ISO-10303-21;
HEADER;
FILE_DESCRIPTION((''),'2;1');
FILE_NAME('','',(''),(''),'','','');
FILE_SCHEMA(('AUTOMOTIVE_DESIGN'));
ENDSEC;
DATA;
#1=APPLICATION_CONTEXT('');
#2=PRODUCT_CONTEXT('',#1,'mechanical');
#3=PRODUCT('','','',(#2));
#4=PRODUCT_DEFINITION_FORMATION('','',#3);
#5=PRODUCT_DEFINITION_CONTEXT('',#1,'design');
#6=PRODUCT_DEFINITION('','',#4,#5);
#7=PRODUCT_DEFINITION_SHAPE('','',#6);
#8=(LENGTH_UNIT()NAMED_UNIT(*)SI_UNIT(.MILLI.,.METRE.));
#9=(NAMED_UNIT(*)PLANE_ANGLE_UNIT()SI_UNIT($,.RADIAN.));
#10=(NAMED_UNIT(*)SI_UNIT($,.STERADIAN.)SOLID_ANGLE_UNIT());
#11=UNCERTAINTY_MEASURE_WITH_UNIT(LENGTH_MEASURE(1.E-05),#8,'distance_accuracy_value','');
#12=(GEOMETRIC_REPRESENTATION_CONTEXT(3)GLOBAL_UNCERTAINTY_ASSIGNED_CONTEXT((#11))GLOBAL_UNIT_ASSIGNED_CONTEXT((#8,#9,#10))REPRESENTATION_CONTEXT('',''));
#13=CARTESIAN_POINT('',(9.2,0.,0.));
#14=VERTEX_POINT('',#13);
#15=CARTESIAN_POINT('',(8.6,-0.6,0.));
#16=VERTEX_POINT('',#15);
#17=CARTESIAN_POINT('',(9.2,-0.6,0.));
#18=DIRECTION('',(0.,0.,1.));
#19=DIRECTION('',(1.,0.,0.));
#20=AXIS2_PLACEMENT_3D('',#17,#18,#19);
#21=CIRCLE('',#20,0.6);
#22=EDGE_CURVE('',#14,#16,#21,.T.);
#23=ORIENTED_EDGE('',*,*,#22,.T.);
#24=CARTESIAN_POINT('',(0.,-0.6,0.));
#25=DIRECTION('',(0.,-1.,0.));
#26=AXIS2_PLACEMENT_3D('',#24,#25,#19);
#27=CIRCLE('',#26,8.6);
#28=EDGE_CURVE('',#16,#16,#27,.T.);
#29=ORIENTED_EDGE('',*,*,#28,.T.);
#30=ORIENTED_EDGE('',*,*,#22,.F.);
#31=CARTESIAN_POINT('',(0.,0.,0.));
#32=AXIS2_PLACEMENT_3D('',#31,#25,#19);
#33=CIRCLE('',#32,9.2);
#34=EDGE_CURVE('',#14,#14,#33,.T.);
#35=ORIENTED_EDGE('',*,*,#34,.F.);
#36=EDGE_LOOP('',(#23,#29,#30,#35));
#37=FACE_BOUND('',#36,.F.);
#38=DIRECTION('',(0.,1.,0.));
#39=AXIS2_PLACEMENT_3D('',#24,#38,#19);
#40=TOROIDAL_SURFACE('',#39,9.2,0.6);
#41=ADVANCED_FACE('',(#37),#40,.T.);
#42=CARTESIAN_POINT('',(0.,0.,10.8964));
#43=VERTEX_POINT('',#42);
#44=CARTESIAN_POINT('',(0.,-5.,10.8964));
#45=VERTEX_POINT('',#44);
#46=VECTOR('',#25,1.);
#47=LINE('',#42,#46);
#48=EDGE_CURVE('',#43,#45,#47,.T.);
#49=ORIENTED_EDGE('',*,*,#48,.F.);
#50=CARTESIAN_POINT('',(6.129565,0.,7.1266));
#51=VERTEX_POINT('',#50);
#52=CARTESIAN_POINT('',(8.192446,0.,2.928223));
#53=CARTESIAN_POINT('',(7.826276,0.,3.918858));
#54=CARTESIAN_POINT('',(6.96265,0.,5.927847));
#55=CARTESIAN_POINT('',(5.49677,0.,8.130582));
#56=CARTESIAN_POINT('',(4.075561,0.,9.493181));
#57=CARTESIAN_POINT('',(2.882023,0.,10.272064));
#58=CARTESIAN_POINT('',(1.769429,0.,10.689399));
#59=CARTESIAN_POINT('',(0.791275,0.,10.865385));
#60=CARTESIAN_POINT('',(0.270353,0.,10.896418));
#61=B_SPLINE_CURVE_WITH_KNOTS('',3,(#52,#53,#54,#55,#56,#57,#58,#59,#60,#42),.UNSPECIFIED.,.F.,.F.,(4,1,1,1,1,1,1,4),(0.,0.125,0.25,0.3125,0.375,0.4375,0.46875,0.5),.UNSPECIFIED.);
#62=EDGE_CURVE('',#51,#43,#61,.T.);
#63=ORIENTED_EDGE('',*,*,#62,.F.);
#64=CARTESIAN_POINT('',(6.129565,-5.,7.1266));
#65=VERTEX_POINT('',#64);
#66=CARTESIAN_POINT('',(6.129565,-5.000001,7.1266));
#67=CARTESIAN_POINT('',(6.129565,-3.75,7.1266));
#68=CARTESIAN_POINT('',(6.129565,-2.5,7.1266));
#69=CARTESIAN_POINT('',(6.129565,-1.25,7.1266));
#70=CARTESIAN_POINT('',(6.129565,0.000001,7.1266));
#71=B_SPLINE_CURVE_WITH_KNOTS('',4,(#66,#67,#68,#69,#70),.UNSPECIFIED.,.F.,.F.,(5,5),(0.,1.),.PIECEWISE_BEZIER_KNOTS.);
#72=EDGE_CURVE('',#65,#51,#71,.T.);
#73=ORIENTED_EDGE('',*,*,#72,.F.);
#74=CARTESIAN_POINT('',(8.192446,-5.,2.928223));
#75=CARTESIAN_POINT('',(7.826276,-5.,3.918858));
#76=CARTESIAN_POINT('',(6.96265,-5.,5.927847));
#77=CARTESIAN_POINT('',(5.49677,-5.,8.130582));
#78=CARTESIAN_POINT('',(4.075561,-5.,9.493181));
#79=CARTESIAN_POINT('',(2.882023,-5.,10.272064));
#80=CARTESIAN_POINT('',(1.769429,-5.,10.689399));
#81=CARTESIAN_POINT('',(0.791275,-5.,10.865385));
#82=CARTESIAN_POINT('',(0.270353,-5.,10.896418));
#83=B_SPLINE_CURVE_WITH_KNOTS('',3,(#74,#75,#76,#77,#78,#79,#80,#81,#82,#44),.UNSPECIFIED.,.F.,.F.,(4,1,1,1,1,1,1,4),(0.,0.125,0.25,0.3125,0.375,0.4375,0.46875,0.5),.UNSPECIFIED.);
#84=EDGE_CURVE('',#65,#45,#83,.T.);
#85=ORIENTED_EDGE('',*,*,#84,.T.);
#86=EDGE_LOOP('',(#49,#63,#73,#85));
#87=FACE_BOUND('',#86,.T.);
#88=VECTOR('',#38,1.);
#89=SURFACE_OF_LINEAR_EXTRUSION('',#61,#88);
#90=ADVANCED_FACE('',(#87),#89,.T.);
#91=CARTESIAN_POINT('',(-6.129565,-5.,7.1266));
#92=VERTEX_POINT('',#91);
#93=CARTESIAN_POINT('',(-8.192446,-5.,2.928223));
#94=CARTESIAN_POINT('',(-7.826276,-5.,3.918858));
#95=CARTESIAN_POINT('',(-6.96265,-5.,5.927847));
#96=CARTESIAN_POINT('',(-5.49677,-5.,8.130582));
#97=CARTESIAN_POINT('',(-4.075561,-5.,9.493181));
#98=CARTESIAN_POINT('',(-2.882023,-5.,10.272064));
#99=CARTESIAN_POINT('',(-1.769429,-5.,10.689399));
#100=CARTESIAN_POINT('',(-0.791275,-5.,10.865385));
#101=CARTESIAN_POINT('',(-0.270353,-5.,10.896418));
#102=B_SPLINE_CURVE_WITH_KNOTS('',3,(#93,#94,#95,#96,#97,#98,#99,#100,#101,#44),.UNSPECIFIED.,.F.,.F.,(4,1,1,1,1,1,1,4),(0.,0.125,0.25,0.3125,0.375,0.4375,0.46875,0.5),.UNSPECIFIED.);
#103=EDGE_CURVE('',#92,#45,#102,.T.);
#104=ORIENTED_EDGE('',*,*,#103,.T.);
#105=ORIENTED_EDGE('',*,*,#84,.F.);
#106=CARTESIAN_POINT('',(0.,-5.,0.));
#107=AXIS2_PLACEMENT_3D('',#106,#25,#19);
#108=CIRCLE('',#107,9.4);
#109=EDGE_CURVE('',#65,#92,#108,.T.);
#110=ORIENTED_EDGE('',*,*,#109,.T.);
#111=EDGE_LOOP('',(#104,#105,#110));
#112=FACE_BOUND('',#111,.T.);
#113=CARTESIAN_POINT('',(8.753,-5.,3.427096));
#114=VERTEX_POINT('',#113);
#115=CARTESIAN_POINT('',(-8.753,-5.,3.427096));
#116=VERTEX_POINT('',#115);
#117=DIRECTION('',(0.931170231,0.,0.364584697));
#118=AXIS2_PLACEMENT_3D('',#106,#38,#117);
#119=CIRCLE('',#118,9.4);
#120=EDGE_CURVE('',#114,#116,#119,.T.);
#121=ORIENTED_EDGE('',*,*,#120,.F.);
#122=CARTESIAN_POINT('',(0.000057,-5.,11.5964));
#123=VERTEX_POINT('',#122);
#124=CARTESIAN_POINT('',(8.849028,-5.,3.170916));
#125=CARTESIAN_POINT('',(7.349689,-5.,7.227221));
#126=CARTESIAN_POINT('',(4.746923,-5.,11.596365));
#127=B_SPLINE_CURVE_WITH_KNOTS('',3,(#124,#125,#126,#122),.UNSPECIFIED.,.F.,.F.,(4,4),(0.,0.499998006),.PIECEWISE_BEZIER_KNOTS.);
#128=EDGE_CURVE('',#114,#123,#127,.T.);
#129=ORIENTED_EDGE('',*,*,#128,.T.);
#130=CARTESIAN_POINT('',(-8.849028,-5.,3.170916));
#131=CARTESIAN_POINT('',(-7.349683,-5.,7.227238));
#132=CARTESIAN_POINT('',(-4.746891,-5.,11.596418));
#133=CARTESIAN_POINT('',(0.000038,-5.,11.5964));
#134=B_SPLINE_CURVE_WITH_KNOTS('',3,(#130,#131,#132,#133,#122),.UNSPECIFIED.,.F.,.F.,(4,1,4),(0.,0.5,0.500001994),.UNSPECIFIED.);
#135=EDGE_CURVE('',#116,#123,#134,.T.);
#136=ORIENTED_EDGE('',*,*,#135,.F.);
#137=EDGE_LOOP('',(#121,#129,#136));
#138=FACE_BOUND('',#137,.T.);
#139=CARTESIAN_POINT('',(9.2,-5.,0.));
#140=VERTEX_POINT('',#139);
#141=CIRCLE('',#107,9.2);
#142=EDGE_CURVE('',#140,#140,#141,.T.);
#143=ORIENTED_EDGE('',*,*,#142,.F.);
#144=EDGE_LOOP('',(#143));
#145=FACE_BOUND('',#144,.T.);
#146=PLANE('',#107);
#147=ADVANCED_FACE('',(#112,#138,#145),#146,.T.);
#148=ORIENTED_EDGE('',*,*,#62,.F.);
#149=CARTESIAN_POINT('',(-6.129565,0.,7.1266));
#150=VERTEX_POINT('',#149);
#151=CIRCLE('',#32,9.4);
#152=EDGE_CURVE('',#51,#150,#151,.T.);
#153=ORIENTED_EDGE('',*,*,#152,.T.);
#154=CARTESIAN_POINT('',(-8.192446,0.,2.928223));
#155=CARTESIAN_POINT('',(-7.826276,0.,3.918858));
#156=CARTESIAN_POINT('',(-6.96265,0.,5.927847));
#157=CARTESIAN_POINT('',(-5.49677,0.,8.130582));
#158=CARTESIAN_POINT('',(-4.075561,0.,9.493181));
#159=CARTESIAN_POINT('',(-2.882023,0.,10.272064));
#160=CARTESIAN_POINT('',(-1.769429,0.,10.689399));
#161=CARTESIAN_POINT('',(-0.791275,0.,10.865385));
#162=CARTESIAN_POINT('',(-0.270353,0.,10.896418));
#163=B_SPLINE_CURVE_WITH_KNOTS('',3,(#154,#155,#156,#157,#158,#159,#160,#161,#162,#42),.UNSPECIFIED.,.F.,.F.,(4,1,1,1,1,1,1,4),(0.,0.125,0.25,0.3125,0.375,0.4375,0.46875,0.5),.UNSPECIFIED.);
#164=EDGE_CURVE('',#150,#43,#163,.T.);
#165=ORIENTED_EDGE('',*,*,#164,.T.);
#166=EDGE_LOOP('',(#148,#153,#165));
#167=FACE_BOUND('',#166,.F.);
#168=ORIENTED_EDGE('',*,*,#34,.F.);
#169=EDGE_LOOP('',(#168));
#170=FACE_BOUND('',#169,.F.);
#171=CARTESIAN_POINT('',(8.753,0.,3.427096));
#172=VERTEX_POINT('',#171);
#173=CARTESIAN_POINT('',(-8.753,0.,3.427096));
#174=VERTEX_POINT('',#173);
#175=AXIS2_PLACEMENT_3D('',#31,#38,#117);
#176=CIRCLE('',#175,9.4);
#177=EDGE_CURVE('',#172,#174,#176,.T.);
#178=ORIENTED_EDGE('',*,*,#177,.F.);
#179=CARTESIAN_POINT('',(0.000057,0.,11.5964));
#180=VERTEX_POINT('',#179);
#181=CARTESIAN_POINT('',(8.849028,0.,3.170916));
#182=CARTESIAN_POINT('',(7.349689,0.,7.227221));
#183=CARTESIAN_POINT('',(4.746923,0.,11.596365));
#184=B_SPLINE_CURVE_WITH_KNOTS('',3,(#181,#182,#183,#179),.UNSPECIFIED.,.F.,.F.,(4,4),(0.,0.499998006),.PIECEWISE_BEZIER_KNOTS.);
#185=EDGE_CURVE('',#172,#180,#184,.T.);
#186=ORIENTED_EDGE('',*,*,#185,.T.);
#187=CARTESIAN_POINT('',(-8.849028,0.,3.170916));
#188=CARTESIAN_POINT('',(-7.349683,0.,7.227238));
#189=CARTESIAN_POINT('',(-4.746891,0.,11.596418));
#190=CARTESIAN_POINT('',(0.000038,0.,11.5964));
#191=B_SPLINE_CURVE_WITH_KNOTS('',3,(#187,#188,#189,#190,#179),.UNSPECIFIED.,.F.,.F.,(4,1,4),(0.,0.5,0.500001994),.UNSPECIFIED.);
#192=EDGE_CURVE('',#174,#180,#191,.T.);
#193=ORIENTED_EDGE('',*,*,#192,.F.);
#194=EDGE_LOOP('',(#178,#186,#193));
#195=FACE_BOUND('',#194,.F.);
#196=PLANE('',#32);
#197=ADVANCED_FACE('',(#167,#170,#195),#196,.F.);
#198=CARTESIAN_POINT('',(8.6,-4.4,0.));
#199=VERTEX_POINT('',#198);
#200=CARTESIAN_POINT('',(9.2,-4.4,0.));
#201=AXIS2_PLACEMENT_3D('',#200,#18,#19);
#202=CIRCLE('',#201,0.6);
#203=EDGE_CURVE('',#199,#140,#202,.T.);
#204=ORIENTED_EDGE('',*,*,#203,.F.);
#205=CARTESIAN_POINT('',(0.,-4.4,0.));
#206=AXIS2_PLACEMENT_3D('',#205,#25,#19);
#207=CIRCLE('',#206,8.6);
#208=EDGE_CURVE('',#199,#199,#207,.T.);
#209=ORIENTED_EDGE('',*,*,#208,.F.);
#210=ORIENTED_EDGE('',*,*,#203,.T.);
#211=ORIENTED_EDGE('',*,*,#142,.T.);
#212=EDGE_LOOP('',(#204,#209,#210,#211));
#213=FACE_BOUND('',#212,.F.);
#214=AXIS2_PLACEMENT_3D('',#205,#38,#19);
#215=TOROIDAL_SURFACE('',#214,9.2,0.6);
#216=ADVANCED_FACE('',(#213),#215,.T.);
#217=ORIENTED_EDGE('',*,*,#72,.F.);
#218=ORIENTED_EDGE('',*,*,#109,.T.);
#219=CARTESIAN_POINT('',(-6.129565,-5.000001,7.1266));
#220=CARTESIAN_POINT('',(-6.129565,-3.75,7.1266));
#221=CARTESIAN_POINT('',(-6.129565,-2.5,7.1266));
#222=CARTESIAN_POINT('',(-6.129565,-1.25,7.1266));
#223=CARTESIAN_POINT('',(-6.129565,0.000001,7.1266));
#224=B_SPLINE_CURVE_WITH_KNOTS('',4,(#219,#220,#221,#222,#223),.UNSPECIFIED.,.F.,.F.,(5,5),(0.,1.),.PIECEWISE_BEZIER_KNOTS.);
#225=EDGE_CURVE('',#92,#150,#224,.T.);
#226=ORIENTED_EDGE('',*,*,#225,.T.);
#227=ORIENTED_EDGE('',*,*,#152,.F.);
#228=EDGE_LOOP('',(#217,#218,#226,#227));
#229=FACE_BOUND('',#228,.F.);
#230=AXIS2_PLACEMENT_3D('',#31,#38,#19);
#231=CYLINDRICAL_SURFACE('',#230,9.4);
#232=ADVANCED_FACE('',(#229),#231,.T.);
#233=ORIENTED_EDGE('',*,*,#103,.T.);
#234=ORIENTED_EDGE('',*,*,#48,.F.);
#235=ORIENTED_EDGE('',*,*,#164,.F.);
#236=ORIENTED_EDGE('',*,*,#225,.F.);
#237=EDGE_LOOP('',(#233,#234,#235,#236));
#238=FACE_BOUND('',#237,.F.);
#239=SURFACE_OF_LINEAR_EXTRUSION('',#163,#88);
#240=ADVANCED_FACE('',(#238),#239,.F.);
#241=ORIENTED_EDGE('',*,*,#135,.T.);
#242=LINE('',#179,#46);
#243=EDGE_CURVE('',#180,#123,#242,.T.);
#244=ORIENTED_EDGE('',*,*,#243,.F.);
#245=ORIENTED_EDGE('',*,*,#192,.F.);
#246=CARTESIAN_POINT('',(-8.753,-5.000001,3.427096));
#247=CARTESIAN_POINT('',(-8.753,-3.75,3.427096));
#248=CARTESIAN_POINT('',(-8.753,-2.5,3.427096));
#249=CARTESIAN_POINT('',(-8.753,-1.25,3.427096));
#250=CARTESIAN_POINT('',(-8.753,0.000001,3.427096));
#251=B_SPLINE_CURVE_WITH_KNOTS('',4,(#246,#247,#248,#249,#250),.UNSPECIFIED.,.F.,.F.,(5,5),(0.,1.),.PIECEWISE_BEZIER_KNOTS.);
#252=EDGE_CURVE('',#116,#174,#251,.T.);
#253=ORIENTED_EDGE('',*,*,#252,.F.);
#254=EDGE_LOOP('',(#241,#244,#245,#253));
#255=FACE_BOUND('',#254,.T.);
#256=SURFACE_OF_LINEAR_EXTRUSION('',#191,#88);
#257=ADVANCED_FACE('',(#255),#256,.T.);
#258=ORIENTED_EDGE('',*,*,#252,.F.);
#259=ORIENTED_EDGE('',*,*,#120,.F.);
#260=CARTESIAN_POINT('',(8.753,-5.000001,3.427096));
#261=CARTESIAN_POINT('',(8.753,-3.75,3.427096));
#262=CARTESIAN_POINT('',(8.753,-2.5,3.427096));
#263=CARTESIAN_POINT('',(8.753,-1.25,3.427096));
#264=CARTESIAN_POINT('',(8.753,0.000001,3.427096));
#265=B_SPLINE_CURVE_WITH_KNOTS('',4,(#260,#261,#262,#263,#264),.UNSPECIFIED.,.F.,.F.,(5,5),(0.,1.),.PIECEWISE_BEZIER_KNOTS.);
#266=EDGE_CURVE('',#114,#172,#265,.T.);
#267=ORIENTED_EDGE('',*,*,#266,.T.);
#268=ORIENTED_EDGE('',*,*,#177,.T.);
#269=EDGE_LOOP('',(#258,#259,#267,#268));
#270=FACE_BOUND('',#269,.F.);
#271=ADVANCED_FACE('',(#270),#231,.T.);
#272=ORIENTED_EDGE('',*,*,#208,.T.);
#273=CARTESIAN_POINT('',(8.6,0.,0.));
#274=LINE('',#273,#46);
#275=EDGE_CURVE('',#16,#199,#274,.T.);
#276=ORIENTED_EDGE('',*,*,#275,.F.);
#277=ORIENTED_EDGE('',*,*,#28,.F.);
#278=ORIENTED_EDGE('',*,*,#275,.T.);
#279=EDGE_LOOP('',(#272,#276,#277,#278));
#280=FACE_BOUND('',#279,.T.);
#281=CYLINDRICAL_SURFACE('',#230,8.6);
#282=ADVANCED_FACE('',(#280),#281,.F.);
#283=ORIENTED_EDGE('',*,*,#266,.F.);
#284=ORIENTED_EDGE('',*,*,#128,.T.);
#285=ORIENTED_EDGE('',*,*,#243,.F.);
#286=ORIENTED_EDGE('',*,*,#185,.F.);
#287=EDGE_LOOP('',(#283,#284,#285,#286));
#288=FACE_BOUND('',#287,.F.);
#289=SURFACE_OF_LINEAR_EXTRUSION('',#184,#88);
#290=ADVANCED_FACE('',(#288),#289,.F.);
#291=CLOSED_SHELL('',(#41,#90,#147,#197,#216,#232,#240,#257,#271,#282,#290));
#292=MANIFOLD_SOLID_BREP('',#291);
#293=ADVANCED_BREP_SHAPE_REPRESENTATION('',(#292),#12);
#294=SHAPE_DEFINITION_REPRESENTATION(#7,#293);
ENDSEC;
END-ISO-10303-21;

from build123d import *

# Parameters (mm, degrees)
F0_R     = 9.4
F0_R_2   = 8.6
F1_DEPTH = 5
F3_DEPTH = 5
F4_R     = 0.6


# Not quite as in the source:
# - the dataset's text gives a spline's control points without its knots; the knots are read off the source's solid


with BuildPart() as f1:
    # F0 (on Front) → F1 (new body)
    with BuildSketch(Plane.XZ):
        Circle(F0_R)
        Circle(F0_R_2, mode=Mode.SUBTRACT)
    extrude(amount=F1_DEPTH)

    # F2 (on Front) → F3 (join)
    with BuildSketch(Plane.XZ):
        with BuildLine():
            add(Edge.make_bspline(
                [(-8.8490276873, 3.1709161121), (-7.3496829409, 7.2272375548), (-4.746891386, 11.5964177027), (3.78631e-05, 11.5964002776), (5.67948e-05, 11.5964002775)],
                knots=[0, 0, 0, 0, 0.5, 0.5000019941, 0.5000019941, 0.5000019941, 0.5000019941], degree=3))
            Line((-8.8490276873, 3.1709161121), (-8.1924457198, 2.9282226429))
            add(Edge.make_bspline(
                [(-8.1924457198, 2.9282226429), (-7.8262756691, 3.9188576733), (-6.9626502108, 5.9278467604), (-5.4967702335, 8.1305819439), (-4.0755610615, 9.4931807293), (-2.8820227839, 10.2720641504), (-1.7694285607, 10.6893985819), (-0.7912754674, 10.8653850416), (-0.2703531008, 10.896417707), (0, 10.8964002777)],
                knots=[0, 0, 0, 0, 0.125, 0.25, 0.3125, 0.375, 0.4375, 0.46875, 0.5, 0.5, 0.5, 0.5], degree=3))
            add(Edge.make_bspline(
                [(8.1924457198, 2.9282226429), (7.8262756691, 3.9188576733), (6.9626502108, 5.9278467604), (5.4967702335, 8.1305819439), (4.0755610615, 9.4931807293), (2.8820227839, 10.2720641504), (1.7694285607, 10.6893985819), (0.7912754674, 10.8653850416), (0.2703531008, 10.896417707), (0, 10.8964002777)],
                knots=[0, 0, 0, 0, 0.125, 0.25, 0.3125, 0.375, 0.4375, 0.46875, 0.5, 0.5, 0.5, 0.5], degree=3))
            Line((8.1924457198, 2.9282226429), (8.8490276873, 3.1709161121))
            add(Edge.make_bspline(
                [(8.8490276873, 3.1709161121), (7.3496889206, 7.2272213774), (4.7469225273, 11.5963654275), (5.67948e-05, 11.5964002775)],
                knots=[0, 0, 0, 0, 0.4999980059, 0.4999980059, 0.4999980059, 0.4999980059], degree=3))
        make_face()
    extrude(amount=F3_DEPTH)

    # F4
    f4_edges = [f1.edges().sort_by_distance(p)[0] for p in [
        (-8.6, -5, 0),
        (-8.6, 0, 0),
    ]]
    fillet(f4_edges, radius=F4_R)


solid = f1.part
